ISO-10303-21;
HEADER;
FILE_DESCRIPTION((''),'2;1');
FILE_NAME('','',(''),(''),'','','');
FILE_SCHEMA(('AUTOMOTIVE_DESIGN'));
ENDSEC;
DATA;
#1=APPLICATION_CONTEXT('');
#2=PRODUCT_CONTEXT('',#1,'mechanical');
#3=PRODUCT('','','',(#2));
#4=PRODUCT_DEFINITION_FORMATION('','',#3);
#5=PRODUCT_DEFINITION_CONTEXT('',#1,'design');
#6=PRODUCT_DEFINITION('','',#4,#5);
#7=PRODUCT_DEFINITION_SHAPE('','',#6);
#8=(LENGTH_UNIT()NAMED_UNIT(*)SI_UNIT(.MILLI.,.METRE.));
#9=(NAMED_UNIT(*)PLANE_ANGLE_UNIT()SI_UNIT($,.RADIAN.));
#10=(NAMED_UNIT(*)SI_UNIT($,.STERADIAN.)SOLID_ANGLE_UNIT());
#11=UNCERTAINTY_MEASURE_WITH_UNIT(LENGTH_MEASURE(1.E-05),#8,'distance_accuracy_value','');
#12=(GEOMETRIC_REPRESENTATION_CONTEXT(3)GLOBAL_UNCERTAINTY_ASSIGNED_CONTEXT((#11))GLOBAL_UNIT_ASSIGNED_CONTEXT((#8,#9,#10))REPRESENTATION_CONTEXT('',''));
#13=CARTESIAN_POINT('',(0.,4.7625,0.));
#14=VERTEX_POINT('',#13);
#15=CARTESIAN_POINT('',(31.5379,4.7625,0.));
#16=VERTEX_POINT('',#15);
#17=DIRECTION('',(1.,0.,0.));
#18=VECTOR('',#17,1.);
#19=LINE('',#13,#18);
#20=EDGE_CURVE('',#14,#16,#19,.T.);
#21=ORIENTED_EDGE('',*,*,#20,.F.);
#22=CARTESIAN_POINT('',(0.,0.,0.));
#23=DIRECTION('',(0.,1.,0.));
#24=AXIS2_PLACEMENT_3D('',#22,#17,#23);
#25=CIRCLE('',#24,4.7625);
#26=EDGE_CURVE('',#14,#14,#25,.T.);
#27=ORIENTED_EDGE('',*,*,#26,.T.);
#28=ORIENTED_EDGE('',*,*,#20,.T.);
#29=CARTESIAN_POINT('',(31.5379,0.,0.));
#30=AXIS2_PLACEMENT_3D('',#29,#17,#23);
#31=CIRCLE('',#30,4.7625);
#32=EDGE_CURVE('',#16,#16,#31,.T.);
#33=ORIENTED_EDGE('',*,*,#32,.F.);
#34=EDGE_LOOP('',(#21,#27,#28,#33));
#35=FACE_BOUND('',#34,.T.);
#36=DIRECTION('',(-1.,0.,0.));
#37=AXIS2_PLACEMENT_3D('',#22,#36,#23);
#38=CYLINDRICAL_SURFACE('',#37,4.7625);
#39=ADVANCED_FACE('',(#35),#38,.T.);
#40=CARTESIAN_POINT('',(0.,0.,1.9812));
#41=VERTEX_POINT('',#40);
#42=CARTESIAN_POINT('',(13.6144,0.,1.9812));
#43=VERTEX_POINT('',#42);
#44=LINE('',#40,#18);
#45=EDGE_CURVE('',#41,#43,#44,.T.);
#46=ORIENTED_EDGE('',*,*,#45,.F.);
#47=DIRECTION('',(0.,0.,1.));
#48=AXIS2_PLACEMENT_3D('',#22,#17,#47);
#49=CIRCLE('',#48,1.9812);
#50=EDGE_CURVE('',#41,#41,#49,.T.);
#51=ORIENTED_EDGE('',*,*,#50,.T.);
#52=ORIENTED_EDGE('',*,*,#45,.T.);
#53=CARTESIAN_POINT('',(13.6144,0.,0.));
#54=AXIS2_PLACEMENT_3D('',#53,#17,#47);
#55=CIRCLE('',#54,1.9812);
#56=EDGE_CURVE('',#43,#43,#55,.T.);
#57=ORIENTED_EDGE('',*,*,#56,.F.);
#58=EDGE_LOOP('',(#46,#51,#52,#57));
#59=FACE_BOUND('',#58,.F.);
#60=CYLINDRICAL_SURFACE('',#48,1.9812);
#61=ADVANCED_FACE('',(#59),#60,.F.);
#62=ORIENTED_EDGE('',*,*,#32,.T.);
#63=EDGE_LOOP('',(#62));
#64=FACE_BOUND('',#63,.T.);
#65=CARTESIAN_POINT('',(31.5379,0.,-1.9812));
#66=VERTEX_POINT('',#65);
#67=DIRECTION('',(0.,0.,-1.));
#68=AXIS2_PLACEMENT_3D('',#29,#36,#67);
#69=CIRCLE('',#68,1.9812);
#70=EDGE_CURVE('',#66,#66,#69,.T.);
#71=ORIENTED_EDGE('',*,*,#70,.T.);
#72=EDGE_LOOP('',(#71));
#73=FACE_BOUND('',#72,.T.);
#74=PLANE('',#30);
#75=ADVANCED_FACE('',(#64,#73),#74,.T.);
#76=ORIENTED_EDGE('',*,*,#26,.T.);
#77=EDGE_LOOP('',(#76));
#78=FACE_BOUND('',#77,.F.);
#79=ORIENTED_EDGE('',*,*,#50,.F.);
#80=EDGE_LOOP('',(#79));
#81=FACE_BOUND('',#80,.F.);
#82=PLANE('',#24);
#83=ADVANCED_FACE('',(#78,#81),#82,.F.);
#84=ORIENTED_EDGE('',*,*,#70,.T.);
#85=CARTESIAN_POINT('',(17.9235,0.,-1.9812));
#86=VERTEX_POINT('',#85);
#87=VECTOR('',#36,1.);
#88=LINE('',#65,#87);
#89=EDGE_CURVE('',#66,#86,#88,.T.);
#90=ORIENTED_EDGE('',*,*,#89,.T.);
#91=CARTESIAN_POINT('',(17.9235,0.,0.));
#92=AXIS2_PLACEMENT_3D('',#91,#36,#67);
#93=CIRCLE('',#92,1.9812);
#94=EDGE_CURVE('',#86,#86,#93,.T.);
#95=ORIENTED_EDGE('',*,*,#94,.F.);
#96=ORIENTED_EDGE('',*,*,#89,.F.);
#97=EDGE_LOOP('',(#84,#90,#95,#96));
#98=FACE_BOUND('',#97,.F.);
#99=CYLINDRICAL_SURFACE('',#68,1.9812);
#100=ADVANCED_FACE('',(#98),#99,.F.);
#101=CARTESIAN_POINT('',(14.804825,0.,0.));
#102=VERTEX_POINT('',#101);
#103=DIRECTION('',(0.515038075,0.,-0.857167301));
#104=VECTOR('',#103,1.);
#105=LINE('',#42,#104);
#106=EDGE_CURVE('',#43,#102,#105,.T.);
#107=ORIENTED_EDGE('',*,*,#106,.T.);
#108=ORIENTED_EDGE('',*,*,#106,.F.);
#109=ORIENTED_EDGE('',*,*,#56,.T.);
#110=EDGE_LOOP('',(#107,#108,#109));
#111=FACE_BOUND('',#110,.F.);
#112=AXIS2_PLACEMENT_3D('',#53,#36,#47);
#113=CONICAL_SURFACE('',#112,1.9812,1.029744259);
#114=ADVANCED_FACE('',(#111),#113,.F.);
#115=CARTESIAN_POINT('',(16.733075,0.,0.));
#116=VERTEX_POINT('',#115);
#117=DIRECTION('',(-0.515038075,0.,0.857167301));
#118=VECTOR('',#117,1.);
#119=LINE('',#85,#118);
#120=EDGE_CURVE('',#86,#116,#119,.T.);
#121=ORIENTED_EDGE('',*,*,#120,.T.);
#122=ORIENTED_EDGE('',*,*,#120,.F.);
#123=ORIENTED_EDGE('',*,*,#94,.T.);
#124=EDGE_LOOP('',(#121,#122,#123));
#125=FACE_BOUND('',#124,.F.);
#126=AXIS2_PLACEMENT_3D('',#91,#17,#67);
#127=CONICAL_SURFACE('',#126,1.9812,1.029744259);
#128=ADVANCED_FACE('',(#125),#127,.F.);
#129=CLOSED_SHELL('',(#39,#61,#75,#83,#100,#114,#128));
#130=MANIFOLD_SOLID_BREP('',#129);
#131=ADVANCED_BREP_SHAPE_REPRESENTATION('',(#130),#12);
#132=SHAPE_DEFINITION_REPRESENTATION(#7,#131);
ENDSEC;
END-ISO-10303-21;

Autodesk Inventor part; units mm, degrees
ref_plane "YZ Plane" through (0, 0, 0) normal (1, 0, 0) x (0, 1, 0)
ref_plane "XZ Plane" through (0, 0, 0) normal (0, 1, 0) x (-1, 0, 0)
ref_plane "XY Plane" through (0, 0, 0) normal (0, 0, 1) x (1, 0, 0)
sketch "Sketch1" plane through (0, 0, 0) normal (1, 0, 0) x (0, 1, 0)
  circle A0 centre (0, 0) radius 4.7625
  dimension "d0" = 9.525
extrude "Extrusion1" add sketch "Sketch1" along normal blind 31.5379
sketch "Sketch2" plane through (31.5379, 0, 0) normal (1, 0, 0) x (0, 0, -1)
  point P0 (0, 0)
  point P1 (0, 0)
hole "Hole1" at (31.5379, 0, 0) direction (-1, 0, 0) diameter 3.9624 depth 13.6144 tip angle 118 thread size "10-32 UNF" class "2B" standard "ANSI Unified Screw Threads"
sketch "Sketch3" plane through (0, 0, 0) normal (-1, 0, 0) x (0, 0, 1)
  point P0 (0, 0)
  point P1 (0, 0)
hole "Hole2" at (0, 0, 0) direction (1, 0, 0) diameter 3.9624 depth 13.6144 tip angle 118 thread size "10-32 UNF" class "2B" standard "ANSI Unified Screw Threads"
properties part number "STOCK,REVERSER,STANDOFF" material "Aluminum 6061"
